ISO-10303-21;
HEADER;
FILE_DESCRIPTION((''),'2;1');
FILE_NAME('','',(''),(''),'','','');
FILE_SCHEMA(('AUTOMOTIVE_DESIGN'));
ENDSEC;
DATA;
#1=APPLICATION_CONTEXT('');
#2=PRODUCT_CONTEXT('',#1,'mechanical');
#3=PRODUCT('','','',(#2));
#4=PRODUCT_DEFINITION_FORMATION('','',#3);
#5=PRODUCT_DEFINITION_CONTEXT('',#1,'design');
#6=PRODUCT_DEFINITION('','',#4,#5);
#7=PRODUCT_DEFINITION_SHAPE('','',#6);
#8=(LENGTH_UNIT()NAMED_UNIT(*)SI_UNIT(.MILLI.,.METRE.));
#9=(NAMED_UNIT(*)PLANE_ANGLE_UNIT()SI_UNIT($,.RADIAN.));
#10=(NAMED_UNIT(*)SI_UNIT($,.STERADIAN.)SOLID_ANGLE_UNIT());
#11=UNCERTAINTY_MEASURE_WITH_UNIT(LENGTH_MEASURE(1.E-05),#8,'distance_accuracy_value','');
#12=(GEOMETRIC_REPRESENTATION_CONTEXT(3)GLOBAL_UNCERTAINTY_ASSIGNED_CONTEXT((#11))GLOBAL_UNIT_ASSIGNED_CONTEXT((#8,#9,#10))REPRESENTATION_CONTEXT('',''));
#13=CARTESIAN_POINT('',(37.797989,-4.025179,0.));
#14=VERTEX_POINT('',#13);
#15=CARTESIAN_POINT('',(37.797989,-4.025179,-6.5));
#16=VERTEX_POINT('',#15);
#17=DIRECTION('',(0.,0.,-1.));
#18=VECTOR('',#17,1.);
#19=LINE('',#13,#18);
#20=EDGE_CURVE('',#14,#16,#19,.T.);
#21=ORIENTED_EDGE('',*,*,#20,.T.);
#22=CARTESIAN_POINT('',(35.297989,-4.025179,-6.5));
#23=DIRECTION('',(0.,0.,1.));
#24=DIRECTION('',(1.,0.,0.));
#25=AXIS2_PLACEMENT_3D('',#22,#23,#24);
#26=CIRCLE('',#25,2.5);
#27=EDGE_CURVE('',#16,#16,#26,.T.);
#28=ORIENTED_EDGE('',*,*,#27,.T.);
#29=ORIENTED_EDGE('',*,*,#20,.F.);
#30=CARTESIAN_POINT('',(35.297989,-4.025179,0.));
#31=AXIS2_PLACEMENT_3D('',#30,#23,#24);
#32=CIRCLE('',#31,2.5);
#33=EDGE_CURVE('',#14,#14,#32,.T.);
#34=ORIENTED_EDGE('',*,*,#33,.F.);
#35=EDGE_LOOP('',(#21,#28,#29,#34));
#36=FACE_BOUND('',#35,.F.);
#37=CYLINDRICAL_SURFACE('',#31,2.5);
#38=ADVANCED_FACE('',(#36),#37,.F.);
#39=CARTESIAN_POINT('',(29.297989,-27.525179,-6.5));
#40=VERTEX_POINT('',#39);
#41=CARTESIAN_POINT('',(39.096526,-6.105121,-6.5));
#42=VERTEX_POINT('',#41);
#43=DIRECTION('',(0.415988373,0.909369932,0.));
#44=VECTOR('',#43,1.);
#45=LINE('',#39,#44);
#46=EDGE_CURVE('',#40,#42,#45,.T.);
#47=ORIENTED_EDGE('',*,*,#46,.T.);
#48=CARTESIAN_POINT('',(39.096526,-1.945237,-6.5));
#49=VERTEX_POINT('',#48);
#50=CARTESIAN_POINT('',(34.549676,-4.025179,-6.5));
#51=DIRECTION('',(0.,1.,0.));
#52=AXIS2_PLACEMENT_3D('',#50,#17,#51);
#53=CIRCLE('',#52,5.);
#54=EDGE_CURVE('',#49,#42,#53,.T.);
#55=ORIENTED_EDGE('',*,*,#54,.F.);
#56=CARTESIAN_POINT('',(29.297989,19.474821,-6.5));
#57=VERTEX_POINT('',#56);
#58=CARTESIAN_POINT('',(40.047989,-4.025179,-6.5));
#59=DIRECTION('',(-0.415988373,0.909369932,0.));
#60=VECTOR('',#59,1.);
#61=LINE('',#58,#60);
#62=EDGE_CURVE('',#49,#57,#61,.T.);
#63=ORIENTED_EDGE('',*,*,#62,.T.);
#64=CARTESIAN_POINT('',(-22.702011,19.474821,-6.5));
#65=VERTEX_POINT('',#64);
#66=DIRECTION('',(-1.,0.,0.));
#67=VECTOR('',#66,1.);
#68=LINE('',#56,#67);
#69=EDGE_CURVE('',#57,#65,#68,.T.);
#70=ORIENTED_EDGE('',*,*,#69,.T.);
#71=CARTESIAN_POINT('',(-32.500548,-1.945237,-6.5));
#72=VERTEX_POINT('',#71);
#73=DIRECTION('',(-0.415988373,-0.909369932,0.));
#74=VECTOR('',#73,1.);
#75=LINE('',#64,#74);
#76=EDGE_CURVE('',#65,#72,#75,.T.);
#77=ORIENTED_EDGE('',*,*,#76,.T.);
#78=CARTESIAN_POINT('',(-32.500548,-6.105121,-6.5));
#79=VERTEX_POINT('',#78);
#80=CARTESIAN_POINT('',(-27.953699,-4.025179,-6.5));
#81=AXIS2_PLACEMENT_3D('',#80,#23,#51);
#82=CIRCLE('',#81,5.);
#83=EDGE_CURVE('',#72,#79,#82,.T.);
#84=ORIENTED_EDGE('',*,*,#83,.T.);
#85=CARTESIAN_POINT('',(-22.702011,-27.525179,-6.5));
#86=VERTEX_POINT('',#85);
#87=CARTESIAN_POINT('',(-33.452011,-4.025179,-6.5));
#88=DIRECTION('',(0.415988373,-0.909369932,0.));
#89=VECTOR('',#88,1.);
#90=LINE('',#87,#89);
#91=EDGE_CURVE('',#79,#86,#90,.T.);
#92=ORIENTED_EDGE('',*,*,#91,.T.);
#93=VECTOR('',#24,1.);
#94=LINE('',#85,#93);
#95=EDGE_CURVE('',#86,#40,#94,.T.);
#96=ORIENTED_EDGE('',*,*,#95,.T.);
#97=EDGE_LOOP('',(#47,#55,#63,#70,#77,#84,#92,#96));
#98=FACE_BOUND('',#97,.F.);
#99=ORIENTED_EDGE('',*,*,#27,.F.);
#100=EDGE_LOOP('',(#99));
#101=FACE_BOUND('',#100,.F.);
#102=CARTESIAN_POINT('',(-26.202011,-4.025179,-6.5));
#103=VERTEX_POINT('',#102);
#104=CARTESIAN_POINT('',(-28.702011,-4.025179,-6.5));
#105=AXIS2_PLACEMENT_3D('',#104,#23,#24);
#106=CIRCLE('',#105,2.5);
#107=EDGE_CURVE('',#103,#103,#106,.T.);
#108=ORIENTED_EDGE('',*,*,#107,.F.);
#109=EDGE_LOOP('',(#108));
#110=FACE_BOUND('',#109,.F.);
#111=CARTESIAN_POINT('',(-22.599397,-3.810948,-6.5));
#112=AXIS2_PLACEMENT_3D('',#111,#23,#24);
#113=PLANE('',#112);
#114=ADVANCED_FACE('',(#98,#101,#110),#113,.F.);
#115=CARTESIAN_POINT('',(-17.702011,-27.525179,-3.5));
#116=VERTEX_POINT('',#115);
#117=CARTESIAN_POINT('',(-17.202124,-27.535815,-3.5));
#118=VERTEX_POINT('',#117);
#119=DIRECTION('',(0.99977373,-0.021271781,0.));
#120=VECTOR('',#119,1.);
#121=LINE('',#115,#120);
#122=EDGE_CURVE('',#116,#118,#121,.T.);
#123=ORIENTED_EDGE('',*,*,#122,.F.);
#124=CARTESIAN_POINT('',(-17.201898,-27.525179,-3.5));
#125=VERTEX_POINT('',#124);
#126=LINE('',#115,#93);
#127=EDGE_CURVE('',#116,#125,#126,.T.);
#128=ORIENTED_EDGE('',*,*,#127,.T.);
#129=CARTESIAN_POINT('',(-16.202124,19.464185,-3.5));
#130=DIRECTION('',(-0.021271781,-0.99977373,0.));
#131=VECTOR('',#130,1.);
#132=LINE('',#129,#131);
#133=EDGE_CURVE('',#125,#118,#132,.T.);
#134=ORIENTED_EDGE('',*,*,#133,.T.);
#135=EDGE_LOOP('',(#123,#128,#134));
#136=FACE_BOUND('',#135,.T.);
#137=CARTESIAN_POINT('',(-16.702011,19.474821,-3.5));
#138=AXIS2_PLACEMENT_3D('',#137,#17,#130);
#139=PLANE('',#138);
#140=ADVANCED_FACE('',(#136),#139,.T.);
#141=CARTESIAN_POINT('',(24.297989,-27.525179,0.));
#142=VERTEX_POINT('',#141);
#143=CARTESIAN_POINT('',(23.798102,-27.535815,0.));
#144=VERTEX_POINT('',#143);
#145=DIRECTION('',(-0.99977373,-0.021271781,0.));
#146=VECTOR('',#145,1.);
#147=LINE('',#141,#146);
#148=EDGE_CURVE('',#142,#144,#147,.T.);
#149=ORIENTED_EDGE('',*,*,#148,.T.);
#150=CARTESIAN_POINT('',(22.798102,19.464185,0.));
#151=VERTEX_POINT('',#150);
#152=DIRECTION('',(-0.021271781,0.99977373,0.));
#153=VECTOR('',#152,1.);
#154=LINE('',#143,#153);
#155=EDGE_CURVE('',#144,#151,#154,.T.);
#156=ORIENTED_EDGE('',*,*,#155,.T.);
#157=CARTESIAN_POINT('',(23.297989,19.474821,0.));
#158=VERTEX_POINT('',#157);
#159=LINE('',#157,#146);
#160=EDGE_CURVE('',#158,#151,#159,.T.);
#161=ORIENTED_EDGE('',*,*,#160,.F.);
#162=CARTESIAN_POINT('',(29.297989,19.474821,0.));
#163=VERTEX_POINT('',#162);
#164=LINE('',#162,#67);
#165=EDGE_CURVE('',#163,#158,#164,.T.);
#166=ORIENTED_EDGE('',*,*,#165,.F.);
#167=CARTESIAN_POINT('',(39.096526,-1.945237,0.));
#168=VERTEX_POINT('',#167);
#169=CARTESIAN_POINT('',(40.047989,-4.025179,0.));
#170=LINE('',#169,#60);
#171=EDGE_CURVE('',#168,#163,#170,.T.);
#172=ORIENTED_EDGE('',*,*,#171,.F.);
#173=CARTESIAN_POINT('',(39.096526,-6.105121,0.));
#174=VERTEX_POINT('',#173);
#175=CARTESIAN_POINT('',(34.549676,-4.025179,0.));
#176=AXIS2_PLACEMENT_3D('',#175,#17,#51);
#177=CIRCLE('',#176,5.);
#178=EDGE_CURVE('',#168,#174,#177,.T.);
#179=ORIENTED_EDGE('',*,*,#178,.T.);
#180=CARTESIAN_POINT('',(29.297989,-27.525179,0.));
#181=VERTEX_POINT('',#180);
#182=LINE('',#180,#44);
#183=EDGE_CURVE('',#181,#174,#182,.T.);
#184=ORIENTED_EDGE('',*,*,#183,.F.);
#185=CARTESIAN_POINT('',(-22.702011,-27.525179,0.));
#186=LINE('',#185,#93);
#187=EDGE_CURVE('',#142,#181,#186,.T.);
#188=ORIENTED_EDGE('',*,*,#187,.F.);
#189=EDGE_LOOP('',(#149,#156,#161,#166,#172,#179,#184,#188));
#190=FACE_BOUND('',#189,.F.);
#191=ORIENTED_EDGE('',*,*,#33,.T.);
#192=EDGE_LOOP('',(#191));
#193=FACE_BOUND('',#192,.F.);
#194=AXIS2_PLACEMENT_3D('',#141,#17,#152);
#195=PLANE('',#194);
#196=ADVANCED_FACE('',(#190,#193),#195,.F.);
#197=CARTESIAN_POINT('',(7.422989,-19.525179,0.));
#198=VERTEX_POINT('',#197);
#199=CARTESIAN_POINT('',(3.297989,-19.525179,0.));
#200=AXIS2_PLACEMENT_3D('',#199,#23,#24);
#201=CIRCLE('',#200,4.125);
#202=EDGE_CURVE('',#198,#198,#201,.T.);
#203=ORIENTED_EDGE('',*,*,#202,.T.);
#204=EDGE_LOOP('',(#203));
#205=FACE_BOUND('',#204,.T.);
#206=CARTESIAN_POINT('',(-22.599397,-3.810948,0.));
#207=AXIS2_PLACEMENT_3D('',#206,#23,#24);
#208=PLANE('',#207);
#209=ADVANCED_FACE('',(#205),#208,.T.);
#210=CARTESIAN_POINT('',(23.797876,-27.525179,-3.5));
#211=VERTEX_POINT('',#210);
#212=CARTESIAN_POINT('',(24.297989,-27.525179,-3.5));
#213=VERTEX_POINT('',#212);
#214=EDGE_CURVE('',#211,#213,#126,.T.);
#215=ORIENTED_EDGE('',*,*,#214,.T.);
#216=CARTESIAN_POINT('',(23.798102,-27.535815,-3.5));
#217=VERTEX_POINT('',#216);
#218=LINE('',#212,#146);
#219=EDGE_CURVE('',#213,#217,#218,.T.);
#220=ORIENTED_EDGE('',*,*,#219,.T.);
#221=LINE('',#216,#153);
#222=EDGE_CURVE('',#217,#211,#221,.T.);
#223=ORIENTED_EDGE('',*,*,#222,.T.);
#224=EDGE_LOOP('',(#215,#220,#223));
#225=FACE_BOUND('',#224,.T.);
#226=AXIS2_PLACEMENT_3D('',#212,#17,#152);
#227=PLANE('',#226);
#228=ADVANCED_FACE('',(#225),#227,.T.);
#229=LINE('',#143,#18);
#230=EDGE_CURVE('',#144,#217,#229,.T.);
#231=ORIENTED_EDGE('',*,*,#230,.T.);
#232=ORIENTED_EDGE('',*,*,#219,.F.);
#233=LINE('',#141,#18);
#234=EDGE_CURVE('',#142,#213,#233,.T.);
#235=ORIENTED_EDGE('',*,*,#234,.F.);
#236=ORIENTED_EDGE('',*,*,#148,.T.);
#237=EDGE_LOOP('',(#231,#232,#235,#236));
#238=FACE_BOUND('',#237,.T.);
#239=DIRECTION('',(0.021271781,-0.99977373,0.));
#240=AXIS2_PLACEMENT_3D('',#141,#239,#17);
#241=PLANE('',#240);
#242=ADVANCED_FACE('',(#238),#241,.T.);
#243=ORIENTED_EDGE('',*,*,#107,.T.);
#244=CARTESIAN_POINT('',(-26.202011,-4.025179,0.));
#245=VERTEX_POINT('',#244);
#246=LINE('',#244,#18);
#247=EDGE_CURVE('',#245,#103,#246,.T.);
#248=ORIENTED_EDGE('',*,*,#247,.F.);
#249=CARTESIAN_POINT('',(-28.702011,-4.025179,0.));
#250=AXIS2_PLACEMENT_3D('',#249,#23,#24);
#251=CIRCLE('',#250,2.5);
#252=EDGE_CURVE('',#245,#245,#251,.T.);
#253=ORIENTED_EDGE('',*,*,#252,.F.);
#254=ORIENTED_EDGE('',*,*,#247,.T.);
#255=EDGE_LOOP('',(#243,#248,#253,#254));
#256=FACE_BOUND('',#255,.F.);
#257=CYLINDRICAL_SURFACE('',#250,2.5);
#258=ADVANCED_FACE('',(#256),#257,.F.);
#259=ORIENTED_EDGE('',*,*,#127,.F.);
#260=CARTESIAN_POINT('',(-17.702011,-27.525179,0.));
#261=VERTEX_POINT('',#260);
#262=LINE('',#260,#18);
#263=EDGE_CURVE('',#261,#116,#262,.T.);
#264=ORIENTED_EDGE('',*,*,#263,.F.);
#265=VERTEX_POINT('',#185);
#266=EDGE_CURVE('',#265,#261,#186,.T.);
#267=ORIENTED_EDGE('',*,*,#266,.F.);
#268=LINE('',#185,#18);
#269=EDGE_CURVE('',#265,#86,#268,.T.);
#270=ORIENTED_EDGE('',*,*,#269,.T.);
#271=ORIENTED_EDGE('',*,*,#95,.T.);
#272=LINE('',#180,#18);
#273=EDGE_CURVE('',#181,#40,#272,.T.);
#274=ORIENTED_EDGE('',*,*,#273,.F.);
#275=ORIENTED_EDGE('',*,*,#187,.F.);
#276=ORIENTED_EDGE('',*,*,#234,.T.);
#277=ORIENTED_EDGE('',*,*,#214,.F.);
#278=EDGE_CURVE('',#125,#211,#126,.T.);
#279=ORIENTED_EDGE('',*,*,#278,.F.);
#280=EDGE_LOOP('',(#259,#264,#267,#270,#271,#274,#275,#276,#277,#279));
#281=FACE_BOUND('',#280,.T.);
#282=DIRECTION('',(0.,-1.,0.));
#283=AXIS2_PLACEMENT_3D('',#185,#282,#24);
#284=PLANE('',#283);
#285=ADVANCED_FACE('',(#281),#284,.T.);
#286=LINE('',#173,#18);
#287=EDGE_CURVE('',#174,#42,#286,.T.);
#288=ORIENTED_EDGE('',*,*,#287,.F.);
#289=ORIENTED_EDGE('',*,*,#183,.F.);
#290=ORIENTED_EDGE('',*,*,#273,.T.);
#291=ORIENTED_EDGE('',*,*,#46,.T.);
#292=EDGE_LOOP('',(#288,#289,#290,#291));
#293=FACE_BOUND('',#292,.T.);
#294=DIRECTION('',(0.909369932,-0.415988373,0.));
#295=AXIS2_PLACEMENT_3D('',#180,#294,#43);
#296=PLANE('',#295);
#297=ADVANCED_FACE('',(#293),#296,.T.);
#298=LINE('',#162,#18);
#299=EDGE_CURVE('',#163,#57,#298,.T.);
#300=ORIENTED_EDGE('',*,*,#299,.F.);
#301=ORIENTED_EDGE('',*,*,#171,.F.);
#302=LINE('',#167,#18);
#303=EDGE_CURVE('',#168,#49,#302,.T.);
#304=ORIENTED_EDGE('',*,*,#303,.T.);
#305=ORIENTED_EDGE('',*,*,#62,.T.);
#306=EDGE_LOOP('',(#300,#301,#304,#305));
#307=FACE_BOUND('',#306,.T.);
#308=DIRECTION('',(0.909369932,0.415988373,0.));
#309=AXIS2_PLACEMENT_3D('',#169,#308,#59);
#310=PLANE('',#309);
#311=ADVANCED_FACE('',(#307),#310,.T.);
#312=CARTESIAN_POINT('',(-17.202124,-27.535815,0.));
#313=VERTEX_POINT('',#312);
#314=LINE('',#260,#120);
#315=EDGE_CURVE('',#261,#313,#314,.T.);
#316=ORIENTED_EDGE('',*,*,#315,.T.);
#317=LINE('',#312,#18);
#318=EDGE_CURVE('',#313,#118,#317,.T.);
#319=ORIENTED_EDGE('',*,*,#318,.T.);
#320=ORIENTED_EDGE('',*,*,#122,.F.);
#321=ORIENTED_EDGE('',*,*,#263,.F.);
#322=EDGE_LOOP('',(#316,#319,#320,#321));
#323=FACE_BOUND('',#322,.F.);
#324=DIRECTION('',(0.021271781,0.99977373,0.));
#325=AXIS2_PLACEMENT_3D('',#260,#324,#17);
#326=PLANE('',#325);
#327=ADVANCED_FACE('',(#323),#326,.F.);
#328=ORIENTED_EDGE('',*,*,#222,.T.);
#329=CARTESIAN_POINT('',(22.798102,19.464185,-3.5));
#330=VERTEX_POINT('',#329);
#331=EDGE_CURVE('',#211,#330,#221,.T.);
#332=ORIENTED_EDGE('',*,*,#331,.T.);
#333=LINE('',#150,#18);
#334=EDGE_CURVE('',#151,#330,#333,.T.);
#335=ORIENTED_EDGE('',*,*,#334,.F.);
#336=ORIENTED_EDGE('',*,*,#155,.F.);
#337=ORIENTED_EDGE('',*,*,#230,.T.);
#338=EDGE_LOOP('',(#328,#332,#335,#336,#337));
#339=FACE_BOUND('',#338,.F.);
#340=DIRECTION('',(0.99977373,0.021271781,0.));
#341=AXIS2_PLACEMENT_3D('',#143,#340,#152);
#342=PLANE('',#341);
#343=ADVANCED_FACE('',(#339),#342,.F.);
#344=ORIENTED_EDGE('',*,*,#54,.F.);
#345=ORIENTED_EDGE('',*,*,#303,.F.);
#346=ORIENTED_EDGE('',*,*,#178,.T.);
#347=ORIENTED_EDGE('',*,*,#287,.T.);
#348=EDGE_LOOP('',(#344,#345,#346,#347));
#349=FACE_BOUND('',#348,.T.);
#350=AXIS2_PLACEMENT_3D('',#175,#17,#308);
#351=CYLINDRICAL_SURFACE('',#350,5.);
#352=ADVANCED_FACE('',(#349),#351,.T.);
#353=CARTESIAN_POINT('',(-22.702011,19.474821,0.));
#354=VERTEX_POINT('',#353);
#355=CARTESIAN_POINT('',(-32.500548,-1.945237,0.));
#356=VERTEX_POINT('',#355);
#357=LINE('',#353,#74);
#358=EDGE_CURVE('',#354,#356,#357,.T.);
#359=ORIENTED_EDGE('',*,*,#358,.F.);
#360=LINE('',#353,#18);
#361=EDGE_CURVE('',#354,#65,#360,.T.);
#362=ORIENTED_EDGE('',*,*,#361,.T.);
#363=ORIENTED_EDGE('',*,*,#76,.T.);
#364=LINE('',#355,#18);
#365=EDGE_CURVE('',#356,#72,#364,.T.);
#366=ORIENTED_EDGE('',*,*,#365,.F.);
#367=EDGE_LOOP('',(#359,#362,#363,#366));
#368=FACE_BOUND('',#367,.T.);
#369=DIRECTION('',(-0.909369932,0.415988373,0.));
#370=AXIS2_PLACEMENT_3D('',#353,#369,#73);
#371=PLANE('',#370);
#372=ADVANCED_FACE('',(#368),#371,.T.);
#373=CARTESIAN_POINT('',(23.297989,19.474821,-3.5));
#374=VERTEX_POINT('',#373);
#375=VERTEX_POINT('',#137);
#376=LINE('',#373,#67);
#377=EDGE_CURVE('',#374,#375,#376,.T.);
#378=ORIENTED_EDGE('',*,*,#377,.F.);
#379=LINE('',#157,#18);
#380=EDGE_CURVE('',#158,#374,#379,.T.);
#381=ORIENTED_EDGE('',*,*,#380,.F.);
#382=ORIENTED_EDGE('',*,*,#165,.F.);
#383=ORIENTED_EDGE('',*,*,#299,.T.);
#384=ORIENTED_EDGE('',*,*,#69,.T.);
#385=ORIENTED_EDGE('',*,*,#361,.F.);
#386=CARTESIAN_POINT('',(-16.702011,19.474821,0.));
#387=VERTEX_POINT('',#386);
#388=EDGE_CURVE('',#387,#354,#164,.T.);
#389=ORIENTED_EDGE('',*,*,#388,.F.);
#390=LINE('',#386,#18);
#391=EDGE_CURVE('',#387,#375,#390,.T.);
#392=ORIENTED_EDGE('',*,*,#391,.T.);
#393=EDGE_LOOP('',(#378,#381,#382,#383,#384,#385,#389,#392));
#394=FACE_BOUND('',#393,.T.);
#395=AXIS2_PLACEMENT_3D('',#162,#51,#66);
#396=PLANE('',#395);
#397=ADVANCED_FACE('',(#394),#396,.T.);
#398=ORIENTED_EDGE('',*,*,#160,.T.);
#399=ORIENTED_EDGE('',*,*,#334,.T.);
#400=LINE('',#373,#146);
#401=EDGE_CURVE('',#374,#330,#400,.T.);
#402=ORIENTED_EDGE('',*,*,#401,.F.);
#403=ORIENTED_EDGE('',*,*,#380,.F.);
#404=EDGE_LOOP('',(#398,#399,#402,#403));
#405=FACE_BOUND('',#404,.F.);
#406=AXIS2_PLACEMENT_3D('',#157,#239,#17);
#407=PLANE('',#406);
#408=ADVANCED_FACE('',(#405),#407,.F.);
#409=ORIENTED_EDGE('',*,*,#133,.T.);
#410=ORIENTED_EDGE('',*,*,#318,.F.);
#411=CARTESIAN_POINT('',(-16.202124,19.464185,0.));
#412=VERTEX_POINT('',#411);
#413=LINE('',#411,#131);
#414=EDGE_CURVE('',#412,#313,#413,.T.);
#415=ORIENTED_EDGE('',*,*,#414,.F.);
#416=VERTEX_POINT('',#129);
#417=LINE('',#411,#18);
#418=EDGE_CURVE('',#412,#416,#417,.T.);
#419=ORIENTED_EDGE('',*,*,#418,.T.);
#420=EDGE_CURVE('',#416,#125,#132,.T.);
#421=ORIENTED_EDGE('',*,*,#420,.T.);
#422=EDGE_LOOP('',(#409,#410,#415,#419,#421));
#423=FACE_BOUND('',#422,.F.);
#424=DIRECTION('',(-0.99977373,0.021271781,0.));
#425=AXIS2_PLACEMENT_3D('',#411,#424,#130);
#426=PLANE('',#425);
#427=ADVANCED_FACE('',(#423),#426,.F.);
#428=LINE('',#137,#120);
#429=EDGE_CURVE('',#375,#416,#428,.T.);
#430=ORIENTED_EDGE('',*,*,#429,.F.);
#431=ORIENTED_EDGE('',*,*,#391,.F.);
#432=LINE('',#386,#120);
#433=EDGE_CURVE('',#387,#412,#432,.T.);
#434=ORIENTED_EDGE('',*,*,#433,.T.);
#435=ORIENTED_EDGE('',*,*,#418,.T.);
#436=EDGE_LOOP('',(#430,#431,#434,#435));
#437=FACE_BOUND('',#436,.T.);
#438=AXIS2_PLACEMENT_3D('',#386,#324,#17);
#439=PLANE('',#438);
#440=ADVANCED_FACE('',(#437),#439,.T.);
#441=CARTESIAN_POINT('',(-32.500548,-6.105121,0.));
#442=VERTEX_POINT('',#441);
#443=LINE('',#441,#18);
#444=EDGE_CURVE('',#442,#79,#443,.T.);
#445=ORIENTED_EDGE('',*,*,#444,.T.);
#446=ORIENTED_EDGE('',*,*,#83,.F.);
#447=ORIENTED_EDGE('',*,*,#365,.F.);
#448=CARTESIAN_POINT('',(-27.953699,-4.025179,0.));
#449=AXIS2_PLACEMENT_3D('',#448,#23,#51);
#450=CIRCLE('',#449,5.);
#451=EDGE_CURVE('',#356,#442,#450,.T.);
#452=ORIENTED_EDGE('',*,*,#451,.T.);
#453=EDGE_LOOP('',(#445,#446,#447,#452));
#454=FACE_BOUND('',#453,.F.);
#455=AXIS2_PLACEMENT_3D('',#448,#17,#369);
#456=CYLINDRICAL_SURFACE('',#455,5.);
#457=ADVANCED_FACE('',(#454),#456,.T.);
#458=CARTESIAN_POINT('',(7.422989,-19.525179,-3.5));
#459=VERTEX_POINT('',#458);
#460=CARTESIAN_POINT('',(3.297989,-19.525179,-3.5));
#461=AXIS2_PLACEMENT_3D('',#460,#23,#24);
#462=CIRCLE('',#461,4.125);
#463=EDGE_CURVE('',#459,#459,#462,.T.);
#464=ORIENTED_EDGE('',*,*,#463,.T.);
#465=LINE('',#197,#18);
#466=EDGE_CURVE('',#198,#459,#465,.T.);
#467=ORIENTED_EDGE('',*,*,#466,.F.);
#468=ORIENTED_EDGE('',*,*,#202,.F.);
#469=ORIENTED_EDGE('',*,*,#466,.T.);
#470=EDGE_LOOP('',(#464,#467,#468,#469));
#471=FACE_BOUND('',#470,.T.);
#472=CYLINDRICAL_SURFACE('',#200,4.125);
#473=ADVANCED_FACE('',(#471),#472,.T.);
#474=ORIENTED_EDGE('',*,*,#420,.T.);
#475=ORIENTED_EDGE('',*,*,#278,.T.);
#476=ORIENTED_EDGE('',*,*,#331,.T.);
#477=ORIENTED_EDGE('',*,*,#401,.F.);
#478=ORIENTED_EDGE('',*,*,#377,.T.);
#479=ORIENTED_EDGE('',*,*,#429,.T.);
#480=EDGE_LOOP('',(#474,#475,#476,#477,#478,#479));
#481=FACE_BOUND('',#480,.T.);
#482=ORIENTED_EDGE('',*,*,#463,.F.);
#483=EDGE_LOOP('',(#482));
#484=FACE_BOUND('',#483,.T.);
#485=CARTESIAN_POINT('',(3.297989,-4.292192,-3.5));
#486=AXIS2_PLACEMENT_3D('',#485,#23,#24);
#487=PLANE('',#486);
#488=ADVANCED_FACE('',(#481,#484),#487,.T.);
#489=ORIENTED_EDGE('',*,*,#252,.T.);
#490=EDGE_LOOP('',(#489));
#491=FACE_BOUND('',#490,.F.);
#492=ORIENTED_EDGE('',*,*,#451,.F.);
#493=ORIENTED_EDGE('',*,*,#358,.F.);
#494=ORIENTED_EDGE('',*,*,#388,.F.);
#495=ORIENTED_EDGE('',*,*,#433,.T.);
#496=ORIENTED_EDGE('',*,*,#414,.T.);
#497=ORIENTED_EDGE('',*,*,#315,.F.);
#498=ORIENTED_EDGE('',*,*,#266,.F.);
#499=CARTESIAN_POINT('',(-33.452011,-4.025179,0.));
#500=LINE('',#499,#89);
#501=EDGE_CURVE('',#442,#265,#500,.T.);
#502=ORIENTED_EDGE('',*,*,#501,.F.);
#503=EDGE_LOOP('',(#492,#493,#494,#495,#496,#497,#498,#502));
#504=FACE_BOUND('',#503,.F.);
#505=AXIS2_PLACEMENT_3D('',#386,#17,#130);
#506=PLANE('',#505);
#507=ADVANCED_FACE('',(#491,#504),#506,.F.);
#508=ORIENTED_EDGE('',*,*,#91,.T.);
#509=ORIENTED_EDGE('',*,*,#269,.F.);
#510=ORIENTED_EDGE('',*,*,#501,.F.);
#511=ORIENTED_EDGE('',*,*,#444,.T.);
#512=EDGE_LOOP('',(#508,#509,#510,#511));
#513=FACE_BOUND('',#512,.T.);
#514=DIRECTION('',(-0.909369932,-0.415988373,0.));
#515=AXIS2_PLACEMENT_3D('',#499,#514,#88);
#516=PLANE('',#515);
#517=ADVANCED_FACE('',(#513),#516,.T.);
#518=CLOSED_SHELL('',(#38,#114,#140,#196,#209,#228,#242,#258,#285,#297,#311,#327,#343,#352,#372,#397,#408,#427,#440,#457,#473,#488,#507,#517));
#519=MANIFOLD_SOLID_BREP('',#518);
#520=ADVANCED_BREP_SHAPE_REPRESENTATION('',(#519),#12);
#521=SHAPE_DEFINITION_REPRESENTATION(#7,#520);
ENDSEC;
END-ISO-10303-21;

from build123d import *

# Parameters (mm, degrees)
F0_R     = 2.5
F0_R_2   = 4.125
F1_DEPTH = 6.5
F2_DEPTH = 3.5
F3_R     = 5
F4_DEPTH = 0.5
F5_DEPTH = 0.5


# Not quite as in the source:
# - a feature names something its author has since deleted; it is built from what else it names


with BuildPart() as f1:
    # F0 (on Top) → F1 (new body)
    with BuildSketch(Plane.XY):
        Polygon((-16.7020111382, 19.4748209119), (-22.7020111382, 19.4748209119), (-33.4520111382, -4.0251790881), (-22.7020111382, -27.5251790881), (-17.7020111382, -27.5251790881), align=None)
        with Locations((-28.7020111382, -4.0251790881)):
            Circle(F0_R, mode=Mode.SUBTRACT)
        Polygon((23.2979888618, 19.4748209119), (-16.7020111382, 19.4748209119), (-17.7020111382, -27.5251790881), (24.2979888618, -27.5251790881), align=None)
        with Locations((3.2979888618, -19.5251790881)):
            Circle(F0_R_2, mode=Mode.SUBTRACT)
        Polygon((29.2979888618, 19.4748209119), (23.2979888618, 19.4748209119), (24.2979888618, -27.5251790881), (29.2979888618, -27.5251790881), (40.0479888618, -4.0251790881), align=None)
        with Locations((35.2979888618, -4.0251790881)):
            Circle(F0_R, mode=Mode.SUBTRACT)
        with Locations((3.2979888618, -19.5251790881)):
            Circle(F0_R_2)
    extrude(amount=-F1_DEPTH)

    # F0 (on Top) → F2 (cut)
    with BuildSketch(Plane.XY):
        Polygon((23.2979888618, 19.4748209119), (-16.7020111382, 19.4748209119), (-17.7020111382, -27.5251790881), (24.2979888618, -27.5251790881), align=None)
        with Locations((3.2979888618, -19.5251790881)):
            Circle(F0_R_2, mode=Mode.SUBTRACT)
    extrude(amount=-F2_DEPTH, mode=Mode.SUBTRACT)

    # F3
    f3_edges = [f1.edges().sort_by_distance(p)[0] for p in [
        (-33.452011, -4.025179, -3.25),
        (40.047989, -4.025179, -3.25),
    ]]
    fillet(f3_edges, radius=F3_R)

    # F4 (add): a face of the model
    f4_faces = [f1.faces().sort_by_distance(p)[0] for p in [
        (-17.2020111382, -4.0251790881, -1.75),
    ]]
    extrude(f4_faces, amount=F4_DEPTH)

    # F5 (add): a face of the model
    f5_faces = [f1.faces().sort_by_distance(p)[0] for p in [
        (23.7979888618, -4.0251790881, -1.75),
    ]]
    extrude(f5_faces, amount=F5_DEPTH)


solid = f1.part
